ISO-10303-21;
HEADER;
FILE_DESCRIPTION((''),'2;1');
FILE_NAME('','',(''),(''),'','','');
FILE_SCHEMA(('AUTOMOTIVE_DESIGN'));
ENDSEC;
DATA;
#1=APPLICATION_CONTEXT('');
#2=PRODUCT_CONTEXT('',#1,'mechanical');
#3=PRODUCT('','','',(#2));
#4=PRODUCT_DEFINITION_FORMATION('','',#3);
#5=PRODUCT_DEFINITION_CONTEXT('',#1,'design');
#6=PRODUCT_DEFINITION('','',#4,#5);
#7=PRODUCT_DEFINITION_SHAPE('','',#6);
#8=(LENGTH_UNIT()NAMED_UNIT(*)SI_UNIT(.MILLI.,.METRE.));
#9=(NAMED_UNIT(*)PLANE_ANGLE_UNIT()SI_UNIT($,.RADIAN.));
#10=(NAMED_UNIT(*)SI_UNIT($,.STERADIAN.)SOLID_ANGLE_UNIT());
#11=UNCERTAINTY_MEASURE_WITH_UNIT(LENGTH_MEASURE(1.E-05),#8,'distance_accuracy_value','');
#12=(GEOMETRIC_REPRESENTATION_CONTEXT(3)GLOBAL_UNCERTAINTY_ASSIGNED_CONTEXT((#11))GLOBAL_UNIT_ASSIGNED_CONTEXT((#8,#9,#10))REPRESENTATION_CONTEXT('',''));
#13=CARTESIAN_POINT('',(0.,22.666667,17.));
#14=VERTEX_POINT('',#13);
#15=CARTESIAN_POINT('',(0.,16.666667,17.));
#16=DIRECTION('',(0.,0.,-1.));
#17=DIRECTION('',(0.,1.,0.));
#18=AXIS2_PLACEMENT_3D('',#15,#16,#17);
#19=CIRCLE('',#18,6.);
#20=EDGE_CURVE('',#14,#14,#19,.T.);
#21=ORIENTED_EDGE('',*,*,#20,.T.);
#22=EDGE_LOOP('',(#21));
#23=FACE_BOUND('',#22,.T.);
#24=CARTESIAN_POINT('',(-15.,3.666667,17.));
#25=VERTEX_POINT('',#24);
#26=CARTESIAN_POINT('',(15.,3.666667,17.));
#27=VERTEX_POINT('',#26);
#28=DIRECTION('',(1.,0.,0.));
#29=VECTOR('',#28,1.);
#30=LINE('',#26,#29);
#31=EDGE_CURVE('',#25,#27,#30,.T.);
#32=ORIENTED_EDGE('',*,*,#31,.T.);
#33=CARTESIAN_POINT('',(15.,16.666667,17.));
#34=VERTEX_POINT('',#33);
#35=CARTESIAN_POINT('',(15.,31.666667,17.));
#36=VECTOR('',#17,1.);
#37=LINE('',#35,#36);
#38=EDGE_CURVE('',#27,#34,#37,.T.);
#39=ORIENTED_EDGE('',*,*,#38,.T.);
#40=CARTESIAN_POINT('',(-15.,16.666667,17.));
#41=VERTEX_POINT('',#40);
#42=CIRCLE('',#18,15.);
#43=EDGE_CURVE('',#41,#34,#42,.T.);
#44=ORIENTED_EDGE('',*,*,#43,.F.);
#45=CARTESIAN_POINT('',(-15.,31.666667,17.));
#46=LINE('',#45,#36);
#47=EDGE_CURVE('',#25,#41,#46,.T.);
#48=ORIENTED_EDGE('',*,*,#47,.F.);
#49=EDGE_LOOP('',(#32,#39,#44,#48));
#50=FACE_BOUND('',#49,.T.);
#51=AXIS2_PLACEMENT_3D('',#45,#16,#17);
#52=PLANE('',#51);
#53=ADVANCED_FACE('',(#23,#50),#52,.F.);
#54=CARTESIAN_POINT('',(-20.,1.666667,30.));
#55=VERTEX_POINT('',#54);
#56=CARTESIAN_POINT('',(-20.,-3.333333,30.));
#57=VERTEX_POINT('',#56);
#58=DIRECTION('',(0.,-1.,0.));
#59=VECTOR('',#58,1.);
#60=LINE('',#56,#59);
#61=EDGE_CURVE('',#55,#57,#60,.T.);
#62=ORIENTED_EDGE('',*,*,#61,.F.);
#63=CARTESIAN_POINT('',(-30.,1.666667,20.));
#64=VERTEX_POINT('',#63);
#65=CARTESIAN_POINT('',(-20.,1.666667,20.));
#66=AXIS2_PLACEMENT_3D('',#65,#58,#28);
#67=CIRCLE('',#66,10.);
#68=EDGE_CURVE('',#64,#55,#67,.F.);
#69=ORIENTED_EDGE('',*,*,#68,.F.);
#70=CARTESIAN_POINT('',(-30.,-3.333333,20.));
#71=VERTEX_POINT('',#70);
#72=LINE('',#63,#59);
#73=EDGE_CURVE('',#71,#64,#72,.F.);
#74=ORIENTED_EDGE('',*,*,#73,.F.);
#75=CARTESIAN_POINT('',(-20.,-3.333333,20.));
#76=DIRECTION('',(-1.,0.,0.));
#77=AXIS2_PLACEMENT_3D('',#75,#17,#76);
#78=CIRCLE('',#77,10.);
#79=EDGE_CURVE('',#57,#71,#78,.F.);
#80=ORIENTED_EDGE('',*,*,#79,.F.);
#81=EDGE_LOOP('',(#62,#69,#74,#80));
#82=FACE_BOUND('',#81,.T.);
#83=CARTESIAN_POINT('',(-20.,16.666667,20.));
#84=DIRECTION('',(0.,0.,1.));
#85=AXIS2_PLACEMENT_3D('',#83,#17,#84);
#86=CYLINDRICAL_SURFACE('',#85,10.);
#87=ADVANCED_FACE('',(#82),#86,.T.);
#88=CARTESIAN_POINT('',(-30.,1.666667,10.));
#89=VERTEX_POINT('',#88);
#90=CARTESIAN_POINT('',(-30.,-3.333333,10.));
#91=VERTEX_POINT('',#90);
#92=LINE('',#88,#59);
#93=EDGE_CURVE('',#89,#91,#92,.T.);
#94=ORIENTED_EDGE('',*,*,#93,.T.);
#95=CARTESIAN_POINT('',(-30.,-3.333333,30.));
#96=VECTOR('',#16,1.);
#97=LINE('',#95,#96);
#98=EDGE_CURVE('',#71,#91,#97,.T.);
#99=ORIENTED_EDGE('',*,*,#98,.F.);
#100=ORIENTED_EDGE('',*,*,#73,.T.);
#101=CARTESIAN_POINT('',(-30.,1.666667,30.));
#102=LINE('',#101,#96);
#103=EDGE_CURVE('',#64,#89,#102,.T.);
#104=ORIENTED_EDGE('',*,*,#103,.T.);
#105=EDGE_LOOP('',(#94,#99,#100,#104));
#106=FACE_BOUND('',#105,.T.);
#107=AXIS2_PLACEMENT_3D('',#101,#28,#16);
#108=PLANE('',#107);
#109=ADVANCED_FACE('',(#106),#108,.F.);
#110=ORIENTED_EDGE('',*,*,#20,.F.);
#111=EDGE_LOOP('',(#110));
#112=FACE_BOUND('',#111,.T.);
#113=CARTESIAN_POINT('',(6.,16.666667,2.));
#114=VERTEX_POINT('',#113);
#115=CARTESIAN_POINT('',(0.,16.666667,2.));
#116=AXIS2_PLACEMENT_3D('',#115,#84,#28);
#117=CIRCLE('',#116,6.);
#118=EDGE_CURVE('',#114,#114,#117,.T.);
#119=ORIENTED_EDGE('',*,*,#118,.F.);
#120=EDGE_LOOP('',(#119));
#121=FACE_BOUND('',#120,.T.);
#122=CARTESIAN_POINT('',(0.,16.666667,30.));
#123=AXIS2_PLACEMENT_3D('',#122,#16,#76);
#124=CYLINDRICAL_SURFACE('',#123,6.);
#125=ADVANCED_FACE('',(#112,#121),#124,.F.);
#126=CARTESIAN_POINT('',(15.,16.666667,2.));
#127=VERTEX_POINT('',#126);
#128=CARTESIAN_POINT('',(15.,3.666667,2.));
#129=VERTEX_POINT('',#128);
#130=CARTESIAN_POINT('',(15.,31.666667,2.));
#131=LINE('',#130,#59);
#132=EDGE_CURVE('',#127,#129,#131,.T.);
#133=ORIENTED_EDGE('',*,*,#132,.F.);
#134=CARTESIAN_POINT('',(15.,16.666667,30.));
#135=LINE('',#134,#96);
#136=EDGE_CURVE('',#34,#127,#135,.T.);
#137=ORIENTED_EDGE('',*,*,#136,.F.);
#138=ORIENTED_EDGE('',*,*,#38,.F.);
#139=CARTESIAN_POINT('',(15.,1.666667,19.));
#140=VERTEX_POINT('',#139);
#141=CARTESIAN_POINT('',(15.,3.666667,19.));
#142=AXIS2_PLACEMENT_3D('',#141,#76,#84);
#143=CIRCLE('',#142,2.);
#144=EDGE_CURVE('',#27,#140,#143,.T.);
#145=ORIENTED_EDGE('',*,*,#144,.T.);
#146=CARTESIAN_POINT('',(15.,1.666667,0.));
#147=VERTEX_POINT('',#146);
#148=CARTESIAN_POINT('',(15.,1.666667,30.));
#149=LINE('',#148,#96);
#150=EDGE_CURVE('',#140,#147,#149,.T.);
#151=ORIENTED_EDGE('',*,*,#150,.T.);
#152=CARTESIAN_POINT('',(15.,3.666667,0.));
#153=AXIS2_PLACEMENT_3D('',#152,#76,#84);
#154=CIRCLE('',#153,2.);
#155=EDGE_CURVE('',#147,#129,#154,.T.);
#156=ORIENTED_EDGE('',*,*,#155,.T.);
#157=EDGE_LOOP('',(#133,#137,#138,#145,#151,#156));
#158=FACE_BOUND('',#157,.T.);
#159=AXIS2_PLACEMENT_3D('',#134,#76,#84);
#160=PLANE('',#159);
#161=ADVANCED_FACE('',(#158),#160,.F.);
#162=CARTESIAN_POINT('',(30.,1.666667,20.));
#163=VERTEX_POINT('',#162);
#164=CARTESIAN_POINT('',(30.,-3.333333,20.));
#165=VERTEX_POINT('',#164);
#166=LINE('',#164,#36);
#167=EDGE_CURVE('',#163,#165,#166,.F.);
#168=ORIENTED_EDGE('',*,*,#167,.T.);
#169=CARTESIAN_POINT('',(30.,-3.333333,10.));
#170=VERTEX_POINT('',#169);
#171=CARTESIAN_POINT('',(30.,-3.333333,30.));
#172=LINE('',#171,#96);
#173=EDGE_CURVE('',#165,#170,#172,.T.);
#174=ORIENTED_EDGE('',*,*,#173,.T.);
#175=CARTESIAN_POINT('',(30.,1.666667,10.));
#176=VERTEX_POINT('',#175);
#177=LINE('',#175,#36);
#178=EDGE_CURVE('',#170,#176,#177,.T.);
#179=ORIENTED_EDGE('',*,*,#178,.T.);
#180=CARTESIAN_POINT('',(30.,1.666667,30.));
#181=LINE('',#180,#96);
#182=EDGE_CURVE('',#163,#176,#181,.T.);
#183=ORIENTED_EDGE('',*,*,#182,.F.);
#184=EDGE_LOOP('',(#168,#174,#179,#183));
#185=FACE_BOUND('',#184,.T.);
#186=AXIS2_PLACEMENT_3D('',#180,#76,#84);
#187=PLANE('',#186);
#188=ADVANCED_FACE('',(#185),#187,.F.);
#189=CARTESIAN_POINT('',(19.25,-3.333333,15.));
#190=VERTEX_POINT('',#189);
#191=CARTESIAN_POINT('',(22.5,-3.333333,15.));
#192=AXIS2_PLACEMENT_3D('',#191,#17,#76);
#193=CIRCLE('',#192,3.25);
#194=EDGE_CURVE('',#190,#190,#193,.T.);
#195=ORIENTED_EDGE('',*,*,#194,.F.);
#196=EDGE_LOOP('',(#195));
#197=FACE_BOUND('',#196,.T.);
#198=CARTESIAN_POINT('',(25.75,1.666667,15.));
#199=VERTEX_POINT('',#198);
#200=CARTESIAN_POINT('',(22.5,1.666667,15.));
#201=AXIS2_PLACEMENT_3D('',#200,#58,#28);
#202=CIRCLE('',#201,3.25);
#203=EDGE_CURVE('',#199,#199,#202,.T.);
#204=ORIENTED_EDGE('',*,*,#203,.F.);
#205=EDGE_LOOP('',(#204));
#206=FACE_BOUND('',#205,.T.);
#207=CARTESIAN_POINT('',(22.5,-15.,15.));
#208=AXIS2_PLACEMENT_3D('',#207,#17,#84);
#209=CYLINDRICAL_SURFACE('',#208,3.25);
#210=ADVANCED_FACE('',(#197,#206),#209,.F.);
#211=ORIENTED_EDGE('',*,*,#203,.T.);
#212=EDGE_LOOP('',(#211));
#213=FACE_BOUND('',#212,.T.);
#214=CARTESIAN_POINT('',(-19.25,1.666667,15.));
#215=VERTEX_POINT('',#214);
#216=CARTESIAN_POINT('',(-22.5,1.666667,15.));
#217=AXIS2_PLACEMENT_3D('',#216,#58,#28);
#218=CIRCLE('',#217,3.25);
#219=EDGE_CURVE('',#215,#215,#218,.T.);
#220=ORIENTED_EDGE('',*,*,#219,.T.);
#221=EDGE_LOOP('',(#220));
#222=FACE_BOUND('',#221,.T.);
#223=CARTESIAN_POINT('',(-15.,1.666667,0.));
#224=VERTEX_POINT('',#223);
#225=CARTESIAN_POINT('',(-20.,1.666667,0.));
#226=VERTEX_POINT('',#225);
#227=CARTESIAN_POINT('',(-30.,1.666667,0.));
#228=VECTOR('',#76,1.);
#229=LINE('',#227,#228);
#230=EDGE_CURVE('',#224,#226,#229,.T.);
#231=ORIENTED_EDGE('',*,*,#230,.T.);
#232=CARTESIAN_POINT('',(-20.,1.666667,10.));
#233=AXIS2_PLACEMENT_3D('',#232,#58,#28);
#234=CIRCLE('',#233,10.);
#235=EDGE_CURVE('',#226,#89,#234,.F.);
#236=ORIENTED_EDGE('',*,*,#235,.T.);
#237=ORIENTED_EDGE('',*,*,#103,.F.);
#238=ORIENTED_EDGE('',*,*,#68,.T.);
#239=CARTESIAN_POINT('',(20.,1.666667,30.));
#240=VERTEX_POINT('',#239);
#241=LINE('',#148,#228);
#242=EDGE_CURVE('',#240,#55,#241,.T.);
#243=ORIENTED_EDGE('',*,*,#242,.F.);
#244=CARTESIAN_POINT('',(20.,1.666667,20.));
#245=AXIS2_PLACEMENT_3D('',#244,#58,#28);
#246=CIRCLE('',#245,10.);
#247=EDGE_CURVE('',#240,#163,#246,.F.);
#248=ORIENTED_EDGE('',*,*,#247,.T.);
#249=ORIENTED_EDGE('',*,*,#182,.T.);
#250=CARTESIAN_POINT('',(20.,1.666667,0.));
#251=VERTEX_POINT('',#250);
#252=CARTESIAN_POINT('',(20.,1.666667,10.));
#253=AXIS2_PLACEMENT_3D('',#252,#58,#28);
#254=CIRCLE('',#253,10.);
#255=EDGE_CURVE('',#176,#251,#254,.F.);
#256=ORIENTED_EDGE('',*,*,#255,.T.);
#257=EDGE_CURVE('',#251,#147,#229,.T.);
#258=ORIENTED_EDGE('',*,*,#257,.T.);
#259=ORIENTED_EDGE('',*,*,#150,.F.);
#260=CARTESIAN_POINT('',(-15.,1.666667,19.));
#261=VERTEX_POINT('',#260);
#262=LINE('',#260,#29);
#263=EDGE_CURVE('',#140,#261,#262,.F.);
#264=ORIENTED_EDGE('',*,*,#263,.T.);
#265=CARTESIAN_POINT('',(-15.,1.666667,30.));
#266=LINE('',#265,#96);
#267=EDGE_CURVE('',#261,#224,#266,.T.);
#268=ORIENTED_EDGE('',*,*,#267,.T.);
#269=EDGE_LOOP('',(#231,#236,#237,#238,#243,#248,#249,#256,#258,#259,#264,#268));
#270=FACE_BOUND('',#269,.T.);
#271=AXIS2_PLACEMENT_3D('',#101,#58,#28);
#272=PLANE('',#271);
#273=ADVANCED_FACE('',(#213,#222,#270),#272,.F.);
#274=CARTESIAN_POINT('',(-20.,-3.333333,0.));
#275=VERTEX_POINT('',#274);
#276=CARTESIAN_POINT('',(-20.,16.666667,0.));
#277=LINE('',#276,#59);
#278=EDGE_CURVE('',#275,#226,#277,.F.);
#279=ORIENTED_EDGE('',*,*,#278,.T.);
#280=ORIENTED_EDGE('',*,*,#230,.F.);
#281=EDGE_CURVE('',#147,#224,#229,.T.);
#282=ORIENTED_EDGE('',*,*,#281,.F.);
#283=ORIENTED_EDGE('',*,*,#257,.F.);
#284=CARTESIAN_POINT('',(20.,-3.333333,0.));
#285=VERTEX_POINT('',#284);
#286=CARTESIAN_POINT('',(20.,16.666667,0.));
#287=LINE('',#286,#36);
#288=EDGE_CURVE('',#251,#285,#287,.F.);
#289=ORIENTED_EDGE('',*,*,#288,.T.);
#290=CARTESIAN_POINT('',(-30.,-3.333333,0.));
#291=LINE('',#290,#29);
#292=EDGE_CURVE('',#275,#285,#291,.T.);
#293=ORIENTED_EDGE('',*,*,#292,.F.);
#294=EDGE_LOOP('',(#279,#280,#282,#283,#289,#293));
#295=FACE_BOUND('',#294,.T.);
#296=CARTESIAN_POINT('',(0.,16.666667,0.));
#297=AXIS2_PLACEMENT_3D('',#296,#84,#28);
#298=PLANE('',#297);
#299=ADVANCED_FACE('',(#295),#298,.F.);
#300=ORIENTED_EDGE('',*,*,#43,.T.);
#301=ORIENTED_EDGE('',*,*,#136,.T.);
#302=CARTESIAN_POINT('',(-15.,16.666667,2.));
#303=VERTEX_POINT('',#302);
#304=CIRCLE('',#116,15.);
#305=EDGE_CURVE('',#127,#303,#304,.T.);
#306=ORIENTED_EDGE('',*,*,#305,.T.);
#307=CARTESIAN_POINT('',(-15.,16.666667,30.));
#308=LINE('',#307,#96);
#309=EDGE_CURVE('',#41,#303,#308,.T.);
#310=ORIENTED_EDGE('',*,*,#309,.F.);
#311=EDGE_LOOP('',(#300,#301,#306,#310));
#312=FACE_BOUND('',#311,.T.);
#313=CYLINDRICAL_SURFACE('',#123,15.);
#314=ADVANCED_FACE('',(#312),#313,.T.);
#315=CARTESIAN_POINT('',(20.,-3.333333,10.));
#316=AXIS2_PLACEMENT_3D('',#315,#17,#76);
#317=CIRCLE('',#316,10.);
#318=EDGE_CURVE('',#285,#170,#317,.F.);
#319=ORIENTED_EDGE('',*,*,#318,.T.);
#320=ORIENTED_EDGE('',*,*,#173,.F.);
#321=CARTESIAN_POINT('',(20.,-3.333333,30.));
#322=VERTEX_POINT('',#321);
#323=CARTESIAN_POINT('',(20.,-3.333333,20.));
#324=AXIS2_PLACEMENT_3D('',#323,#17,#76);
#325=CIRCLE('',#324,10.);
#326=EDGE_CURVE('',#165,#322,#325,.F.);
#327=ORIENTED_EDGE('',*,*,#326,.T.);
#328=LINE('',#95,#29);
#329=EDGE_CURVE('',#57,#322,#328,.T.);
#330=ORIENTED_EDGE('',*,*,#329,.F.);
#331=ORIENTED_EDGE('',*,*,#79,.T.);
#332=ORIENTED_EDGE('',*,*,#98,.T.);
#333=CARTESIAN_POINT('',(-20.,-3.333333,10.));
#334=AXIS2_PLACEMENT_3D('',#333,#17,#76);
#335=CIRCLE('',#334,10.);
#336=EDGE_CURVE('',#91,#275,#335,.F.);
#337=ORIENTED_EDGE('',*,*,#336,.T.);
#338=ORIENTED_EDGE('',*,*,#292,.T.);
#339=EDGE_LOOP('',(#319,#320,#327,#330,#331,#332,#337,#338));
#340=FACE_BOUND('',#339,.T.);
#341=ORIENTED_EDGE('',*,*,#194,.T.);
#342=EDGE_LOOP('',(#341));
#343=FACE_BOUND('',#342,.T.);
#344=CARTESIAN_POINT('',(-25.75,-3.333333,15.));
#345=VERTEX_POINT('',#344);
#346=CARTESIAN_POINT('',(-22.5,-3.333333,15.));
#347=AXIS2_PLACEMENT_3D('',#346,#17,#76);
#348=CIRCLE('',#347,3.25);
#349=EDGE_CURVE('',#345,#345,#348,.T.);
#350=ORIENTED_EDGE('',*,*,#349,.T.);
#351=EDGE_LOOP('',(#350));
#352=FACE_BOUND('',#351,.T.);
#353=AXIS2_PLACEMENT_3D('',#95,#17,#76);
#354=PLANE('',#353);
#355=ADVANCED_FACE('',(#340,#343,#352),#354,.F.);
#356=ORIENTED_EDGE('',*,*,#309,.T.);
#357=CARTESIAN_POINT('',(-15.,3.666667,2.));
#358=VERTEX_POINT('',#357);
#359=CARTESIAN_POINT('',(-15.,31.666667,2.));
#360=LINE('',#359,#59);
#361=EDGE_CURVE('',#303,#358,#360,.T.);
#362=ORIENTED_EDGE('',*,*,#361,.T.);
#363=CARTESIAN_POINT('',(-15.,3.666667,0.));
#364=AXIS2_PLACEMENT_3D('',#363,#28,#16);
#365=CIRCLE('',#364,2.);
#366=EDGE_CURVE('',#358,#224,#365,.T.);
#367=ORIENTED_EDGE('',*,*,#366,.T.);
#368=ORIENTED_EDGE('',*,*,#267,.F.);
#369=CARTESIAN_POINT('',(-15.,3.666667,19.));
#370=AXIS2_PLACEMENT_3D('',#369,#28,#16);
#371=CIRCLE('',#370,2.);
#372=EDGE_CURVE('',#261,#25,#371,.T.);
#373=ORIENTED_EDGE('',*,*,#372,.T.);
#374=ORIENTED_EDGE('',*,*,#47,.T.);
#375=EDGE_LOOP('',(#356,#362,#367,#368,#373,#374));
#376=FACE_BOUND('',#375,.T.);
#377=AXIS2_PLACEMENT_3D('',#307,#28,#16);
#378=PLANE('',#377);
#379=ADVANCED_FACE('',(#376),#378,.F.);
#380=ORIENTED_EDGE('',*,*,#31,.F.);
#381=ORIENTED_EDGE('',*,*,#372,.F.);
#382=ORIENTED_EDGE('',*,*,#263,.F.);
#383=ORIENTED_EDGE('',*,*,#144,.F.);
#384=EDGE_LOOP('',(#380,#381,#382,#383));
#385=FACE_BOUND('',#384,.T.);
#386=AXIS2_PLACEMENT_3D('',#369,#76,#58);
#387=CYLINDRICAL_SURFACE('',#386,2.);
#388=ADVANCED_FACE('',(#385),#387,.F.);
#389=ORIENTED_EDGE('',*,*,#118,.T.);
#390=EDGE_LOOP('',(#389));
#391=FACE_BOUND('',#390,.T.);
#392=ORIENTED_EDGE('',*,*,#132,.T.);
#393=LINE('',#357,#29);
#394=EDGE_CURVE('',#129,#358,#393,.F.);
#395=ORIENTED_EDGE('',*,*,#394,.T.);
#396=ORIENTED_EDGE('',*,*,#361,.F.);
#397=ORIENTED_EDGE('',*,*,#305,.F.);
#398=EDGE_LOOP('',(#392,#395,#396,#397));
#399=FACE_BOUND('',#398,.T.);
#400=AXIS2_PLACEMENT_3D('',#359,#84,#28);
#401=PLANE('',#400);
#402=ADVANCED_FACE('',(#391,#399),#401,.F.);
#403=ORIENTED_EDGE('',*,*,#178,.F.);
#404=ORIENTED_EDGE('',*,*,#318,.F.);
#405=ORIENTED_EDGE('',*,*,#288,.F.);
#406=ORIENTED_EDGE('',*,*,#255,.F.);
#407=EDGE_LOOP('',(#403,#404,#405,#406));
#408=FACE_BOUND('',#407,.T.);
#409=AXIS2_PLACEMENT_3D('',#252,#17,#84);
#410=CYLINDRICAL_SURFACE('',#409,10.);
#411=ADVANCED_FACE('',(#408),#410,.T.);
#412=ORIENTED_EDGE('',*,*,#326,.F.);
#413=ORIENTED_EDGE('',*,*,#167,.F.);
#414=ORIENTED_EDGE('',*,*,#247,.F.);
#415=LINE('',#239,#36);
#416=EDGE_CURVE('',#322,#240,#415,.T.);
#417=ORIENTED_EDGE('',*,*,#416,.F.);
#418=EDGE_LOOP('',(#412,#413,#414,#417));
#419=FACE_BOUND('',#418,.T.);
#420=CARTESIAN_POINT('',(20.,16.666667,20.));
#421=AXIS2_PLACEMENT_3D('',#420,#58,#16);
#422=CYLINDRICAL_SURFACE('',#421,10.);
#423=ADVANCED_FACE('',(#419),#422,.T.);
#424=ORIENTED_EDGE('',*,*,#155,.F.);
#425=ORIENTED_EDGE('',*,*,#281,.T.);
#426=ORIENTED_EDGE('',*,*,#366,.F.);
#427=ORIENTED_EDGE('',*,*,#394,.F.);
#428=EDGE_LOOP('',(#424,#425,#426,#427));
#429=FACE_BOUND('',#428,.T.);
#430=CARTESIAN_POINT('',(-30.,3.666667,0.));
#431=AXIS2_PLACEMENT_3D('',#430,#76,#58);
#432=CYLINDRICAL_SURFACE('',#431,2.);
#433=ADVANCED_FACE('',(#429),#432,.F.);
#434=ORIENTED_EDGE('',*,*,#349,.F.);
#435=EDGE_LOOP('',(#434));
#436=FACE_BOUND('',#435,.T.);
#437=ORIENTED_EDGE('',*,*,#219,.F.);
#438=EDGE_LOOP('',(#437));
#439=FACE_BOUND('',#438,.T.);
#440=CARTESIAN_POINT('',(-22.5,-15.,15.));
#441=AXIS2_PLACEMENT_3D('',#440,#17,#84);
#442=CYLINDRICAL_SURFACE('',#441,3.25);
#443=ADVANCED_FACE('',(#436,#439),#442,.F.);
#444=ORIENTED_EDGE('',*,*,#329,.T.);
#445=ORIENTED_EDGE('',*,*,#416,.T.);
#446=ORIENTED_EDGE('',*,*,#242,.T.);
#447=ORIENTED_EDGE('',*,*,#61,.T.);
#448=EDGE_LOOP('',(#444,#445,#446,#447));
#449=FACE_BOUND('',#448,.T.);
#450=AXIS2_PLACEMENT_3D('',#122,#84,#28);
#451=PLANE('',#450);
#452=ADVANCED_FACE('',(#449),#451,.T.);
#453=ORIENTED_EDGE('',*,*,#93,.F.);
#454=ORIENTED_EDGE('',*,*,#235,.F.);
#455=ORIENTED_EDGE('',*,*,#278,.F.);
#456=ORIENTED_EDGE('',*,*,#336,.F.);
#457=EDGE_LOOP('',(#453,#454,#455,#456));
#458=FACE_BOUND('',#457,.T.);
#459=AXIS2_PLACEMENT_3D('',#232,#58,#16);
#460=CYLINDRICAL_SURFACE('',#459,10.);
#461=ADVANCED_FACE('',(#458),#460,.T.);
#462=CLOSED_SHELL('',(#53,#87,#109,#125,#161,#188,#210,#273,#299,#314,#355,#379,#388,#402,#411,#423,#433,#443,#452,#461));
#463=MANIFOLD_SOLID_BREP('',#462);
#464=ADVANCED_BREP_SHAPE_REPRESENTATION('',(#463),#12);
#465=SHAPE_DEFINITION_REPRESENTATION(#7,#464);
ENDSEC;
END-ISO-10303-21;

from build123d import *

# Parameters (mm, degrees)
SKETCH_1_R          = 6
EXTRUDE_1_DEPTH     = 30
SKETCH_2_W          = 13
SKETCH_2_H          = 30
SKETCH_2_W_2        = 2
CUT_EXTRUDE_1_DEPTH = 15
SKETCH_3_R          = 3.25
CUT_EXTRUDE_2_DEPTH = 15
FILLET_1_R          = 2
FILLET_2_R          = 10


with BuildPart() as part:
    # 草图1 → 凸台-拉伸1 (new body)
    with BuildSketch(Plane.XY):
        with BuildLine():
            Line((-30, 1.666666667), (-15, 1.666666667))
            Line((-15, 1.666666667), (-15, 16.666666667))
            ThreePointArc((-15, 16.666666667), (0, 31.666666667), (15, 16.666666667))
            Line((15, 16.666666667), (15, 1.666666667))
            Line((15, 1.666666667), (30, 1.666666667))
            Line((30, 1.666666667), (30, -3.333333333))
            Line((30, -3.333333333), (-30, -3.333333333))
            Line((-30, -3.333333333), (-30, 1.666666667))
        make_face()
        with Locations((0, 16.666666667)):
            Circle(SKETCH_1_R, mode=Mode.SUBTRACT)
    extrude(amount=EXTRUDE_1_DEPTH)

    # 草图2 → 切除-拉伸1 (cut, symmetric)
    with BuildSketch(Plane(origin=(0, 0, 0), x_dir=(0, 0, -1), z_dir=(1, 0, 0))):
        with Locations((-23.5, 16.666666667)):
            Rectangle(SKETCH_2_W, SKETCH_2_H)
        with Locations((-1, 16.666666667)):
            Rectangle(SKETCH_2_W_2, SKETCH_2_H)
    extrude(amount=CUT_EXTRUDE_1_DEPTH, both=True, mode=Mode.SUBTRACT)

    # 草图3 → 切除-拉伸2 (cut, symmetric)
    with BuildSketch(Plane(origin=(0, 0, 0), x_dir=(1, 0, 0), z_dir=(0, 1, 0))):
        with Locations((-22.5, -15)):
            Circle(SKETCH_3_R)
        with Locations((22.5, -15)):
            Circle(SKETCH_3_R)
    extrude(amount=CUT_EXTRUDE_2_DEPTH, both=True, mode=Mode.SUBTRACT)

    # 圆角1
    fillet_1_edges = [part.edges().sort_by_distance(p)[0] for p in [
        (0, 1.666666667, 17),
        (0, 1.666666667, 2),
    ]]
    fillet(fillet_1_edges, radius=FILLET_1_R - 0.0001)  # a hair under: the kernel refuses the full size

    # 圆角2
    fillet_2_edges = [part.edges().sort_by_distance(p)[0] for p in [
        (30, -0.833333333, 30),
        (-30, -0.833333333, 0),
        (-30, -0.833333333, 30),
        (30, -0.833333333, 0),
    ]]
    fillet(fillet_2_edges, radius=FILLET_2_R)


solid = part.part
